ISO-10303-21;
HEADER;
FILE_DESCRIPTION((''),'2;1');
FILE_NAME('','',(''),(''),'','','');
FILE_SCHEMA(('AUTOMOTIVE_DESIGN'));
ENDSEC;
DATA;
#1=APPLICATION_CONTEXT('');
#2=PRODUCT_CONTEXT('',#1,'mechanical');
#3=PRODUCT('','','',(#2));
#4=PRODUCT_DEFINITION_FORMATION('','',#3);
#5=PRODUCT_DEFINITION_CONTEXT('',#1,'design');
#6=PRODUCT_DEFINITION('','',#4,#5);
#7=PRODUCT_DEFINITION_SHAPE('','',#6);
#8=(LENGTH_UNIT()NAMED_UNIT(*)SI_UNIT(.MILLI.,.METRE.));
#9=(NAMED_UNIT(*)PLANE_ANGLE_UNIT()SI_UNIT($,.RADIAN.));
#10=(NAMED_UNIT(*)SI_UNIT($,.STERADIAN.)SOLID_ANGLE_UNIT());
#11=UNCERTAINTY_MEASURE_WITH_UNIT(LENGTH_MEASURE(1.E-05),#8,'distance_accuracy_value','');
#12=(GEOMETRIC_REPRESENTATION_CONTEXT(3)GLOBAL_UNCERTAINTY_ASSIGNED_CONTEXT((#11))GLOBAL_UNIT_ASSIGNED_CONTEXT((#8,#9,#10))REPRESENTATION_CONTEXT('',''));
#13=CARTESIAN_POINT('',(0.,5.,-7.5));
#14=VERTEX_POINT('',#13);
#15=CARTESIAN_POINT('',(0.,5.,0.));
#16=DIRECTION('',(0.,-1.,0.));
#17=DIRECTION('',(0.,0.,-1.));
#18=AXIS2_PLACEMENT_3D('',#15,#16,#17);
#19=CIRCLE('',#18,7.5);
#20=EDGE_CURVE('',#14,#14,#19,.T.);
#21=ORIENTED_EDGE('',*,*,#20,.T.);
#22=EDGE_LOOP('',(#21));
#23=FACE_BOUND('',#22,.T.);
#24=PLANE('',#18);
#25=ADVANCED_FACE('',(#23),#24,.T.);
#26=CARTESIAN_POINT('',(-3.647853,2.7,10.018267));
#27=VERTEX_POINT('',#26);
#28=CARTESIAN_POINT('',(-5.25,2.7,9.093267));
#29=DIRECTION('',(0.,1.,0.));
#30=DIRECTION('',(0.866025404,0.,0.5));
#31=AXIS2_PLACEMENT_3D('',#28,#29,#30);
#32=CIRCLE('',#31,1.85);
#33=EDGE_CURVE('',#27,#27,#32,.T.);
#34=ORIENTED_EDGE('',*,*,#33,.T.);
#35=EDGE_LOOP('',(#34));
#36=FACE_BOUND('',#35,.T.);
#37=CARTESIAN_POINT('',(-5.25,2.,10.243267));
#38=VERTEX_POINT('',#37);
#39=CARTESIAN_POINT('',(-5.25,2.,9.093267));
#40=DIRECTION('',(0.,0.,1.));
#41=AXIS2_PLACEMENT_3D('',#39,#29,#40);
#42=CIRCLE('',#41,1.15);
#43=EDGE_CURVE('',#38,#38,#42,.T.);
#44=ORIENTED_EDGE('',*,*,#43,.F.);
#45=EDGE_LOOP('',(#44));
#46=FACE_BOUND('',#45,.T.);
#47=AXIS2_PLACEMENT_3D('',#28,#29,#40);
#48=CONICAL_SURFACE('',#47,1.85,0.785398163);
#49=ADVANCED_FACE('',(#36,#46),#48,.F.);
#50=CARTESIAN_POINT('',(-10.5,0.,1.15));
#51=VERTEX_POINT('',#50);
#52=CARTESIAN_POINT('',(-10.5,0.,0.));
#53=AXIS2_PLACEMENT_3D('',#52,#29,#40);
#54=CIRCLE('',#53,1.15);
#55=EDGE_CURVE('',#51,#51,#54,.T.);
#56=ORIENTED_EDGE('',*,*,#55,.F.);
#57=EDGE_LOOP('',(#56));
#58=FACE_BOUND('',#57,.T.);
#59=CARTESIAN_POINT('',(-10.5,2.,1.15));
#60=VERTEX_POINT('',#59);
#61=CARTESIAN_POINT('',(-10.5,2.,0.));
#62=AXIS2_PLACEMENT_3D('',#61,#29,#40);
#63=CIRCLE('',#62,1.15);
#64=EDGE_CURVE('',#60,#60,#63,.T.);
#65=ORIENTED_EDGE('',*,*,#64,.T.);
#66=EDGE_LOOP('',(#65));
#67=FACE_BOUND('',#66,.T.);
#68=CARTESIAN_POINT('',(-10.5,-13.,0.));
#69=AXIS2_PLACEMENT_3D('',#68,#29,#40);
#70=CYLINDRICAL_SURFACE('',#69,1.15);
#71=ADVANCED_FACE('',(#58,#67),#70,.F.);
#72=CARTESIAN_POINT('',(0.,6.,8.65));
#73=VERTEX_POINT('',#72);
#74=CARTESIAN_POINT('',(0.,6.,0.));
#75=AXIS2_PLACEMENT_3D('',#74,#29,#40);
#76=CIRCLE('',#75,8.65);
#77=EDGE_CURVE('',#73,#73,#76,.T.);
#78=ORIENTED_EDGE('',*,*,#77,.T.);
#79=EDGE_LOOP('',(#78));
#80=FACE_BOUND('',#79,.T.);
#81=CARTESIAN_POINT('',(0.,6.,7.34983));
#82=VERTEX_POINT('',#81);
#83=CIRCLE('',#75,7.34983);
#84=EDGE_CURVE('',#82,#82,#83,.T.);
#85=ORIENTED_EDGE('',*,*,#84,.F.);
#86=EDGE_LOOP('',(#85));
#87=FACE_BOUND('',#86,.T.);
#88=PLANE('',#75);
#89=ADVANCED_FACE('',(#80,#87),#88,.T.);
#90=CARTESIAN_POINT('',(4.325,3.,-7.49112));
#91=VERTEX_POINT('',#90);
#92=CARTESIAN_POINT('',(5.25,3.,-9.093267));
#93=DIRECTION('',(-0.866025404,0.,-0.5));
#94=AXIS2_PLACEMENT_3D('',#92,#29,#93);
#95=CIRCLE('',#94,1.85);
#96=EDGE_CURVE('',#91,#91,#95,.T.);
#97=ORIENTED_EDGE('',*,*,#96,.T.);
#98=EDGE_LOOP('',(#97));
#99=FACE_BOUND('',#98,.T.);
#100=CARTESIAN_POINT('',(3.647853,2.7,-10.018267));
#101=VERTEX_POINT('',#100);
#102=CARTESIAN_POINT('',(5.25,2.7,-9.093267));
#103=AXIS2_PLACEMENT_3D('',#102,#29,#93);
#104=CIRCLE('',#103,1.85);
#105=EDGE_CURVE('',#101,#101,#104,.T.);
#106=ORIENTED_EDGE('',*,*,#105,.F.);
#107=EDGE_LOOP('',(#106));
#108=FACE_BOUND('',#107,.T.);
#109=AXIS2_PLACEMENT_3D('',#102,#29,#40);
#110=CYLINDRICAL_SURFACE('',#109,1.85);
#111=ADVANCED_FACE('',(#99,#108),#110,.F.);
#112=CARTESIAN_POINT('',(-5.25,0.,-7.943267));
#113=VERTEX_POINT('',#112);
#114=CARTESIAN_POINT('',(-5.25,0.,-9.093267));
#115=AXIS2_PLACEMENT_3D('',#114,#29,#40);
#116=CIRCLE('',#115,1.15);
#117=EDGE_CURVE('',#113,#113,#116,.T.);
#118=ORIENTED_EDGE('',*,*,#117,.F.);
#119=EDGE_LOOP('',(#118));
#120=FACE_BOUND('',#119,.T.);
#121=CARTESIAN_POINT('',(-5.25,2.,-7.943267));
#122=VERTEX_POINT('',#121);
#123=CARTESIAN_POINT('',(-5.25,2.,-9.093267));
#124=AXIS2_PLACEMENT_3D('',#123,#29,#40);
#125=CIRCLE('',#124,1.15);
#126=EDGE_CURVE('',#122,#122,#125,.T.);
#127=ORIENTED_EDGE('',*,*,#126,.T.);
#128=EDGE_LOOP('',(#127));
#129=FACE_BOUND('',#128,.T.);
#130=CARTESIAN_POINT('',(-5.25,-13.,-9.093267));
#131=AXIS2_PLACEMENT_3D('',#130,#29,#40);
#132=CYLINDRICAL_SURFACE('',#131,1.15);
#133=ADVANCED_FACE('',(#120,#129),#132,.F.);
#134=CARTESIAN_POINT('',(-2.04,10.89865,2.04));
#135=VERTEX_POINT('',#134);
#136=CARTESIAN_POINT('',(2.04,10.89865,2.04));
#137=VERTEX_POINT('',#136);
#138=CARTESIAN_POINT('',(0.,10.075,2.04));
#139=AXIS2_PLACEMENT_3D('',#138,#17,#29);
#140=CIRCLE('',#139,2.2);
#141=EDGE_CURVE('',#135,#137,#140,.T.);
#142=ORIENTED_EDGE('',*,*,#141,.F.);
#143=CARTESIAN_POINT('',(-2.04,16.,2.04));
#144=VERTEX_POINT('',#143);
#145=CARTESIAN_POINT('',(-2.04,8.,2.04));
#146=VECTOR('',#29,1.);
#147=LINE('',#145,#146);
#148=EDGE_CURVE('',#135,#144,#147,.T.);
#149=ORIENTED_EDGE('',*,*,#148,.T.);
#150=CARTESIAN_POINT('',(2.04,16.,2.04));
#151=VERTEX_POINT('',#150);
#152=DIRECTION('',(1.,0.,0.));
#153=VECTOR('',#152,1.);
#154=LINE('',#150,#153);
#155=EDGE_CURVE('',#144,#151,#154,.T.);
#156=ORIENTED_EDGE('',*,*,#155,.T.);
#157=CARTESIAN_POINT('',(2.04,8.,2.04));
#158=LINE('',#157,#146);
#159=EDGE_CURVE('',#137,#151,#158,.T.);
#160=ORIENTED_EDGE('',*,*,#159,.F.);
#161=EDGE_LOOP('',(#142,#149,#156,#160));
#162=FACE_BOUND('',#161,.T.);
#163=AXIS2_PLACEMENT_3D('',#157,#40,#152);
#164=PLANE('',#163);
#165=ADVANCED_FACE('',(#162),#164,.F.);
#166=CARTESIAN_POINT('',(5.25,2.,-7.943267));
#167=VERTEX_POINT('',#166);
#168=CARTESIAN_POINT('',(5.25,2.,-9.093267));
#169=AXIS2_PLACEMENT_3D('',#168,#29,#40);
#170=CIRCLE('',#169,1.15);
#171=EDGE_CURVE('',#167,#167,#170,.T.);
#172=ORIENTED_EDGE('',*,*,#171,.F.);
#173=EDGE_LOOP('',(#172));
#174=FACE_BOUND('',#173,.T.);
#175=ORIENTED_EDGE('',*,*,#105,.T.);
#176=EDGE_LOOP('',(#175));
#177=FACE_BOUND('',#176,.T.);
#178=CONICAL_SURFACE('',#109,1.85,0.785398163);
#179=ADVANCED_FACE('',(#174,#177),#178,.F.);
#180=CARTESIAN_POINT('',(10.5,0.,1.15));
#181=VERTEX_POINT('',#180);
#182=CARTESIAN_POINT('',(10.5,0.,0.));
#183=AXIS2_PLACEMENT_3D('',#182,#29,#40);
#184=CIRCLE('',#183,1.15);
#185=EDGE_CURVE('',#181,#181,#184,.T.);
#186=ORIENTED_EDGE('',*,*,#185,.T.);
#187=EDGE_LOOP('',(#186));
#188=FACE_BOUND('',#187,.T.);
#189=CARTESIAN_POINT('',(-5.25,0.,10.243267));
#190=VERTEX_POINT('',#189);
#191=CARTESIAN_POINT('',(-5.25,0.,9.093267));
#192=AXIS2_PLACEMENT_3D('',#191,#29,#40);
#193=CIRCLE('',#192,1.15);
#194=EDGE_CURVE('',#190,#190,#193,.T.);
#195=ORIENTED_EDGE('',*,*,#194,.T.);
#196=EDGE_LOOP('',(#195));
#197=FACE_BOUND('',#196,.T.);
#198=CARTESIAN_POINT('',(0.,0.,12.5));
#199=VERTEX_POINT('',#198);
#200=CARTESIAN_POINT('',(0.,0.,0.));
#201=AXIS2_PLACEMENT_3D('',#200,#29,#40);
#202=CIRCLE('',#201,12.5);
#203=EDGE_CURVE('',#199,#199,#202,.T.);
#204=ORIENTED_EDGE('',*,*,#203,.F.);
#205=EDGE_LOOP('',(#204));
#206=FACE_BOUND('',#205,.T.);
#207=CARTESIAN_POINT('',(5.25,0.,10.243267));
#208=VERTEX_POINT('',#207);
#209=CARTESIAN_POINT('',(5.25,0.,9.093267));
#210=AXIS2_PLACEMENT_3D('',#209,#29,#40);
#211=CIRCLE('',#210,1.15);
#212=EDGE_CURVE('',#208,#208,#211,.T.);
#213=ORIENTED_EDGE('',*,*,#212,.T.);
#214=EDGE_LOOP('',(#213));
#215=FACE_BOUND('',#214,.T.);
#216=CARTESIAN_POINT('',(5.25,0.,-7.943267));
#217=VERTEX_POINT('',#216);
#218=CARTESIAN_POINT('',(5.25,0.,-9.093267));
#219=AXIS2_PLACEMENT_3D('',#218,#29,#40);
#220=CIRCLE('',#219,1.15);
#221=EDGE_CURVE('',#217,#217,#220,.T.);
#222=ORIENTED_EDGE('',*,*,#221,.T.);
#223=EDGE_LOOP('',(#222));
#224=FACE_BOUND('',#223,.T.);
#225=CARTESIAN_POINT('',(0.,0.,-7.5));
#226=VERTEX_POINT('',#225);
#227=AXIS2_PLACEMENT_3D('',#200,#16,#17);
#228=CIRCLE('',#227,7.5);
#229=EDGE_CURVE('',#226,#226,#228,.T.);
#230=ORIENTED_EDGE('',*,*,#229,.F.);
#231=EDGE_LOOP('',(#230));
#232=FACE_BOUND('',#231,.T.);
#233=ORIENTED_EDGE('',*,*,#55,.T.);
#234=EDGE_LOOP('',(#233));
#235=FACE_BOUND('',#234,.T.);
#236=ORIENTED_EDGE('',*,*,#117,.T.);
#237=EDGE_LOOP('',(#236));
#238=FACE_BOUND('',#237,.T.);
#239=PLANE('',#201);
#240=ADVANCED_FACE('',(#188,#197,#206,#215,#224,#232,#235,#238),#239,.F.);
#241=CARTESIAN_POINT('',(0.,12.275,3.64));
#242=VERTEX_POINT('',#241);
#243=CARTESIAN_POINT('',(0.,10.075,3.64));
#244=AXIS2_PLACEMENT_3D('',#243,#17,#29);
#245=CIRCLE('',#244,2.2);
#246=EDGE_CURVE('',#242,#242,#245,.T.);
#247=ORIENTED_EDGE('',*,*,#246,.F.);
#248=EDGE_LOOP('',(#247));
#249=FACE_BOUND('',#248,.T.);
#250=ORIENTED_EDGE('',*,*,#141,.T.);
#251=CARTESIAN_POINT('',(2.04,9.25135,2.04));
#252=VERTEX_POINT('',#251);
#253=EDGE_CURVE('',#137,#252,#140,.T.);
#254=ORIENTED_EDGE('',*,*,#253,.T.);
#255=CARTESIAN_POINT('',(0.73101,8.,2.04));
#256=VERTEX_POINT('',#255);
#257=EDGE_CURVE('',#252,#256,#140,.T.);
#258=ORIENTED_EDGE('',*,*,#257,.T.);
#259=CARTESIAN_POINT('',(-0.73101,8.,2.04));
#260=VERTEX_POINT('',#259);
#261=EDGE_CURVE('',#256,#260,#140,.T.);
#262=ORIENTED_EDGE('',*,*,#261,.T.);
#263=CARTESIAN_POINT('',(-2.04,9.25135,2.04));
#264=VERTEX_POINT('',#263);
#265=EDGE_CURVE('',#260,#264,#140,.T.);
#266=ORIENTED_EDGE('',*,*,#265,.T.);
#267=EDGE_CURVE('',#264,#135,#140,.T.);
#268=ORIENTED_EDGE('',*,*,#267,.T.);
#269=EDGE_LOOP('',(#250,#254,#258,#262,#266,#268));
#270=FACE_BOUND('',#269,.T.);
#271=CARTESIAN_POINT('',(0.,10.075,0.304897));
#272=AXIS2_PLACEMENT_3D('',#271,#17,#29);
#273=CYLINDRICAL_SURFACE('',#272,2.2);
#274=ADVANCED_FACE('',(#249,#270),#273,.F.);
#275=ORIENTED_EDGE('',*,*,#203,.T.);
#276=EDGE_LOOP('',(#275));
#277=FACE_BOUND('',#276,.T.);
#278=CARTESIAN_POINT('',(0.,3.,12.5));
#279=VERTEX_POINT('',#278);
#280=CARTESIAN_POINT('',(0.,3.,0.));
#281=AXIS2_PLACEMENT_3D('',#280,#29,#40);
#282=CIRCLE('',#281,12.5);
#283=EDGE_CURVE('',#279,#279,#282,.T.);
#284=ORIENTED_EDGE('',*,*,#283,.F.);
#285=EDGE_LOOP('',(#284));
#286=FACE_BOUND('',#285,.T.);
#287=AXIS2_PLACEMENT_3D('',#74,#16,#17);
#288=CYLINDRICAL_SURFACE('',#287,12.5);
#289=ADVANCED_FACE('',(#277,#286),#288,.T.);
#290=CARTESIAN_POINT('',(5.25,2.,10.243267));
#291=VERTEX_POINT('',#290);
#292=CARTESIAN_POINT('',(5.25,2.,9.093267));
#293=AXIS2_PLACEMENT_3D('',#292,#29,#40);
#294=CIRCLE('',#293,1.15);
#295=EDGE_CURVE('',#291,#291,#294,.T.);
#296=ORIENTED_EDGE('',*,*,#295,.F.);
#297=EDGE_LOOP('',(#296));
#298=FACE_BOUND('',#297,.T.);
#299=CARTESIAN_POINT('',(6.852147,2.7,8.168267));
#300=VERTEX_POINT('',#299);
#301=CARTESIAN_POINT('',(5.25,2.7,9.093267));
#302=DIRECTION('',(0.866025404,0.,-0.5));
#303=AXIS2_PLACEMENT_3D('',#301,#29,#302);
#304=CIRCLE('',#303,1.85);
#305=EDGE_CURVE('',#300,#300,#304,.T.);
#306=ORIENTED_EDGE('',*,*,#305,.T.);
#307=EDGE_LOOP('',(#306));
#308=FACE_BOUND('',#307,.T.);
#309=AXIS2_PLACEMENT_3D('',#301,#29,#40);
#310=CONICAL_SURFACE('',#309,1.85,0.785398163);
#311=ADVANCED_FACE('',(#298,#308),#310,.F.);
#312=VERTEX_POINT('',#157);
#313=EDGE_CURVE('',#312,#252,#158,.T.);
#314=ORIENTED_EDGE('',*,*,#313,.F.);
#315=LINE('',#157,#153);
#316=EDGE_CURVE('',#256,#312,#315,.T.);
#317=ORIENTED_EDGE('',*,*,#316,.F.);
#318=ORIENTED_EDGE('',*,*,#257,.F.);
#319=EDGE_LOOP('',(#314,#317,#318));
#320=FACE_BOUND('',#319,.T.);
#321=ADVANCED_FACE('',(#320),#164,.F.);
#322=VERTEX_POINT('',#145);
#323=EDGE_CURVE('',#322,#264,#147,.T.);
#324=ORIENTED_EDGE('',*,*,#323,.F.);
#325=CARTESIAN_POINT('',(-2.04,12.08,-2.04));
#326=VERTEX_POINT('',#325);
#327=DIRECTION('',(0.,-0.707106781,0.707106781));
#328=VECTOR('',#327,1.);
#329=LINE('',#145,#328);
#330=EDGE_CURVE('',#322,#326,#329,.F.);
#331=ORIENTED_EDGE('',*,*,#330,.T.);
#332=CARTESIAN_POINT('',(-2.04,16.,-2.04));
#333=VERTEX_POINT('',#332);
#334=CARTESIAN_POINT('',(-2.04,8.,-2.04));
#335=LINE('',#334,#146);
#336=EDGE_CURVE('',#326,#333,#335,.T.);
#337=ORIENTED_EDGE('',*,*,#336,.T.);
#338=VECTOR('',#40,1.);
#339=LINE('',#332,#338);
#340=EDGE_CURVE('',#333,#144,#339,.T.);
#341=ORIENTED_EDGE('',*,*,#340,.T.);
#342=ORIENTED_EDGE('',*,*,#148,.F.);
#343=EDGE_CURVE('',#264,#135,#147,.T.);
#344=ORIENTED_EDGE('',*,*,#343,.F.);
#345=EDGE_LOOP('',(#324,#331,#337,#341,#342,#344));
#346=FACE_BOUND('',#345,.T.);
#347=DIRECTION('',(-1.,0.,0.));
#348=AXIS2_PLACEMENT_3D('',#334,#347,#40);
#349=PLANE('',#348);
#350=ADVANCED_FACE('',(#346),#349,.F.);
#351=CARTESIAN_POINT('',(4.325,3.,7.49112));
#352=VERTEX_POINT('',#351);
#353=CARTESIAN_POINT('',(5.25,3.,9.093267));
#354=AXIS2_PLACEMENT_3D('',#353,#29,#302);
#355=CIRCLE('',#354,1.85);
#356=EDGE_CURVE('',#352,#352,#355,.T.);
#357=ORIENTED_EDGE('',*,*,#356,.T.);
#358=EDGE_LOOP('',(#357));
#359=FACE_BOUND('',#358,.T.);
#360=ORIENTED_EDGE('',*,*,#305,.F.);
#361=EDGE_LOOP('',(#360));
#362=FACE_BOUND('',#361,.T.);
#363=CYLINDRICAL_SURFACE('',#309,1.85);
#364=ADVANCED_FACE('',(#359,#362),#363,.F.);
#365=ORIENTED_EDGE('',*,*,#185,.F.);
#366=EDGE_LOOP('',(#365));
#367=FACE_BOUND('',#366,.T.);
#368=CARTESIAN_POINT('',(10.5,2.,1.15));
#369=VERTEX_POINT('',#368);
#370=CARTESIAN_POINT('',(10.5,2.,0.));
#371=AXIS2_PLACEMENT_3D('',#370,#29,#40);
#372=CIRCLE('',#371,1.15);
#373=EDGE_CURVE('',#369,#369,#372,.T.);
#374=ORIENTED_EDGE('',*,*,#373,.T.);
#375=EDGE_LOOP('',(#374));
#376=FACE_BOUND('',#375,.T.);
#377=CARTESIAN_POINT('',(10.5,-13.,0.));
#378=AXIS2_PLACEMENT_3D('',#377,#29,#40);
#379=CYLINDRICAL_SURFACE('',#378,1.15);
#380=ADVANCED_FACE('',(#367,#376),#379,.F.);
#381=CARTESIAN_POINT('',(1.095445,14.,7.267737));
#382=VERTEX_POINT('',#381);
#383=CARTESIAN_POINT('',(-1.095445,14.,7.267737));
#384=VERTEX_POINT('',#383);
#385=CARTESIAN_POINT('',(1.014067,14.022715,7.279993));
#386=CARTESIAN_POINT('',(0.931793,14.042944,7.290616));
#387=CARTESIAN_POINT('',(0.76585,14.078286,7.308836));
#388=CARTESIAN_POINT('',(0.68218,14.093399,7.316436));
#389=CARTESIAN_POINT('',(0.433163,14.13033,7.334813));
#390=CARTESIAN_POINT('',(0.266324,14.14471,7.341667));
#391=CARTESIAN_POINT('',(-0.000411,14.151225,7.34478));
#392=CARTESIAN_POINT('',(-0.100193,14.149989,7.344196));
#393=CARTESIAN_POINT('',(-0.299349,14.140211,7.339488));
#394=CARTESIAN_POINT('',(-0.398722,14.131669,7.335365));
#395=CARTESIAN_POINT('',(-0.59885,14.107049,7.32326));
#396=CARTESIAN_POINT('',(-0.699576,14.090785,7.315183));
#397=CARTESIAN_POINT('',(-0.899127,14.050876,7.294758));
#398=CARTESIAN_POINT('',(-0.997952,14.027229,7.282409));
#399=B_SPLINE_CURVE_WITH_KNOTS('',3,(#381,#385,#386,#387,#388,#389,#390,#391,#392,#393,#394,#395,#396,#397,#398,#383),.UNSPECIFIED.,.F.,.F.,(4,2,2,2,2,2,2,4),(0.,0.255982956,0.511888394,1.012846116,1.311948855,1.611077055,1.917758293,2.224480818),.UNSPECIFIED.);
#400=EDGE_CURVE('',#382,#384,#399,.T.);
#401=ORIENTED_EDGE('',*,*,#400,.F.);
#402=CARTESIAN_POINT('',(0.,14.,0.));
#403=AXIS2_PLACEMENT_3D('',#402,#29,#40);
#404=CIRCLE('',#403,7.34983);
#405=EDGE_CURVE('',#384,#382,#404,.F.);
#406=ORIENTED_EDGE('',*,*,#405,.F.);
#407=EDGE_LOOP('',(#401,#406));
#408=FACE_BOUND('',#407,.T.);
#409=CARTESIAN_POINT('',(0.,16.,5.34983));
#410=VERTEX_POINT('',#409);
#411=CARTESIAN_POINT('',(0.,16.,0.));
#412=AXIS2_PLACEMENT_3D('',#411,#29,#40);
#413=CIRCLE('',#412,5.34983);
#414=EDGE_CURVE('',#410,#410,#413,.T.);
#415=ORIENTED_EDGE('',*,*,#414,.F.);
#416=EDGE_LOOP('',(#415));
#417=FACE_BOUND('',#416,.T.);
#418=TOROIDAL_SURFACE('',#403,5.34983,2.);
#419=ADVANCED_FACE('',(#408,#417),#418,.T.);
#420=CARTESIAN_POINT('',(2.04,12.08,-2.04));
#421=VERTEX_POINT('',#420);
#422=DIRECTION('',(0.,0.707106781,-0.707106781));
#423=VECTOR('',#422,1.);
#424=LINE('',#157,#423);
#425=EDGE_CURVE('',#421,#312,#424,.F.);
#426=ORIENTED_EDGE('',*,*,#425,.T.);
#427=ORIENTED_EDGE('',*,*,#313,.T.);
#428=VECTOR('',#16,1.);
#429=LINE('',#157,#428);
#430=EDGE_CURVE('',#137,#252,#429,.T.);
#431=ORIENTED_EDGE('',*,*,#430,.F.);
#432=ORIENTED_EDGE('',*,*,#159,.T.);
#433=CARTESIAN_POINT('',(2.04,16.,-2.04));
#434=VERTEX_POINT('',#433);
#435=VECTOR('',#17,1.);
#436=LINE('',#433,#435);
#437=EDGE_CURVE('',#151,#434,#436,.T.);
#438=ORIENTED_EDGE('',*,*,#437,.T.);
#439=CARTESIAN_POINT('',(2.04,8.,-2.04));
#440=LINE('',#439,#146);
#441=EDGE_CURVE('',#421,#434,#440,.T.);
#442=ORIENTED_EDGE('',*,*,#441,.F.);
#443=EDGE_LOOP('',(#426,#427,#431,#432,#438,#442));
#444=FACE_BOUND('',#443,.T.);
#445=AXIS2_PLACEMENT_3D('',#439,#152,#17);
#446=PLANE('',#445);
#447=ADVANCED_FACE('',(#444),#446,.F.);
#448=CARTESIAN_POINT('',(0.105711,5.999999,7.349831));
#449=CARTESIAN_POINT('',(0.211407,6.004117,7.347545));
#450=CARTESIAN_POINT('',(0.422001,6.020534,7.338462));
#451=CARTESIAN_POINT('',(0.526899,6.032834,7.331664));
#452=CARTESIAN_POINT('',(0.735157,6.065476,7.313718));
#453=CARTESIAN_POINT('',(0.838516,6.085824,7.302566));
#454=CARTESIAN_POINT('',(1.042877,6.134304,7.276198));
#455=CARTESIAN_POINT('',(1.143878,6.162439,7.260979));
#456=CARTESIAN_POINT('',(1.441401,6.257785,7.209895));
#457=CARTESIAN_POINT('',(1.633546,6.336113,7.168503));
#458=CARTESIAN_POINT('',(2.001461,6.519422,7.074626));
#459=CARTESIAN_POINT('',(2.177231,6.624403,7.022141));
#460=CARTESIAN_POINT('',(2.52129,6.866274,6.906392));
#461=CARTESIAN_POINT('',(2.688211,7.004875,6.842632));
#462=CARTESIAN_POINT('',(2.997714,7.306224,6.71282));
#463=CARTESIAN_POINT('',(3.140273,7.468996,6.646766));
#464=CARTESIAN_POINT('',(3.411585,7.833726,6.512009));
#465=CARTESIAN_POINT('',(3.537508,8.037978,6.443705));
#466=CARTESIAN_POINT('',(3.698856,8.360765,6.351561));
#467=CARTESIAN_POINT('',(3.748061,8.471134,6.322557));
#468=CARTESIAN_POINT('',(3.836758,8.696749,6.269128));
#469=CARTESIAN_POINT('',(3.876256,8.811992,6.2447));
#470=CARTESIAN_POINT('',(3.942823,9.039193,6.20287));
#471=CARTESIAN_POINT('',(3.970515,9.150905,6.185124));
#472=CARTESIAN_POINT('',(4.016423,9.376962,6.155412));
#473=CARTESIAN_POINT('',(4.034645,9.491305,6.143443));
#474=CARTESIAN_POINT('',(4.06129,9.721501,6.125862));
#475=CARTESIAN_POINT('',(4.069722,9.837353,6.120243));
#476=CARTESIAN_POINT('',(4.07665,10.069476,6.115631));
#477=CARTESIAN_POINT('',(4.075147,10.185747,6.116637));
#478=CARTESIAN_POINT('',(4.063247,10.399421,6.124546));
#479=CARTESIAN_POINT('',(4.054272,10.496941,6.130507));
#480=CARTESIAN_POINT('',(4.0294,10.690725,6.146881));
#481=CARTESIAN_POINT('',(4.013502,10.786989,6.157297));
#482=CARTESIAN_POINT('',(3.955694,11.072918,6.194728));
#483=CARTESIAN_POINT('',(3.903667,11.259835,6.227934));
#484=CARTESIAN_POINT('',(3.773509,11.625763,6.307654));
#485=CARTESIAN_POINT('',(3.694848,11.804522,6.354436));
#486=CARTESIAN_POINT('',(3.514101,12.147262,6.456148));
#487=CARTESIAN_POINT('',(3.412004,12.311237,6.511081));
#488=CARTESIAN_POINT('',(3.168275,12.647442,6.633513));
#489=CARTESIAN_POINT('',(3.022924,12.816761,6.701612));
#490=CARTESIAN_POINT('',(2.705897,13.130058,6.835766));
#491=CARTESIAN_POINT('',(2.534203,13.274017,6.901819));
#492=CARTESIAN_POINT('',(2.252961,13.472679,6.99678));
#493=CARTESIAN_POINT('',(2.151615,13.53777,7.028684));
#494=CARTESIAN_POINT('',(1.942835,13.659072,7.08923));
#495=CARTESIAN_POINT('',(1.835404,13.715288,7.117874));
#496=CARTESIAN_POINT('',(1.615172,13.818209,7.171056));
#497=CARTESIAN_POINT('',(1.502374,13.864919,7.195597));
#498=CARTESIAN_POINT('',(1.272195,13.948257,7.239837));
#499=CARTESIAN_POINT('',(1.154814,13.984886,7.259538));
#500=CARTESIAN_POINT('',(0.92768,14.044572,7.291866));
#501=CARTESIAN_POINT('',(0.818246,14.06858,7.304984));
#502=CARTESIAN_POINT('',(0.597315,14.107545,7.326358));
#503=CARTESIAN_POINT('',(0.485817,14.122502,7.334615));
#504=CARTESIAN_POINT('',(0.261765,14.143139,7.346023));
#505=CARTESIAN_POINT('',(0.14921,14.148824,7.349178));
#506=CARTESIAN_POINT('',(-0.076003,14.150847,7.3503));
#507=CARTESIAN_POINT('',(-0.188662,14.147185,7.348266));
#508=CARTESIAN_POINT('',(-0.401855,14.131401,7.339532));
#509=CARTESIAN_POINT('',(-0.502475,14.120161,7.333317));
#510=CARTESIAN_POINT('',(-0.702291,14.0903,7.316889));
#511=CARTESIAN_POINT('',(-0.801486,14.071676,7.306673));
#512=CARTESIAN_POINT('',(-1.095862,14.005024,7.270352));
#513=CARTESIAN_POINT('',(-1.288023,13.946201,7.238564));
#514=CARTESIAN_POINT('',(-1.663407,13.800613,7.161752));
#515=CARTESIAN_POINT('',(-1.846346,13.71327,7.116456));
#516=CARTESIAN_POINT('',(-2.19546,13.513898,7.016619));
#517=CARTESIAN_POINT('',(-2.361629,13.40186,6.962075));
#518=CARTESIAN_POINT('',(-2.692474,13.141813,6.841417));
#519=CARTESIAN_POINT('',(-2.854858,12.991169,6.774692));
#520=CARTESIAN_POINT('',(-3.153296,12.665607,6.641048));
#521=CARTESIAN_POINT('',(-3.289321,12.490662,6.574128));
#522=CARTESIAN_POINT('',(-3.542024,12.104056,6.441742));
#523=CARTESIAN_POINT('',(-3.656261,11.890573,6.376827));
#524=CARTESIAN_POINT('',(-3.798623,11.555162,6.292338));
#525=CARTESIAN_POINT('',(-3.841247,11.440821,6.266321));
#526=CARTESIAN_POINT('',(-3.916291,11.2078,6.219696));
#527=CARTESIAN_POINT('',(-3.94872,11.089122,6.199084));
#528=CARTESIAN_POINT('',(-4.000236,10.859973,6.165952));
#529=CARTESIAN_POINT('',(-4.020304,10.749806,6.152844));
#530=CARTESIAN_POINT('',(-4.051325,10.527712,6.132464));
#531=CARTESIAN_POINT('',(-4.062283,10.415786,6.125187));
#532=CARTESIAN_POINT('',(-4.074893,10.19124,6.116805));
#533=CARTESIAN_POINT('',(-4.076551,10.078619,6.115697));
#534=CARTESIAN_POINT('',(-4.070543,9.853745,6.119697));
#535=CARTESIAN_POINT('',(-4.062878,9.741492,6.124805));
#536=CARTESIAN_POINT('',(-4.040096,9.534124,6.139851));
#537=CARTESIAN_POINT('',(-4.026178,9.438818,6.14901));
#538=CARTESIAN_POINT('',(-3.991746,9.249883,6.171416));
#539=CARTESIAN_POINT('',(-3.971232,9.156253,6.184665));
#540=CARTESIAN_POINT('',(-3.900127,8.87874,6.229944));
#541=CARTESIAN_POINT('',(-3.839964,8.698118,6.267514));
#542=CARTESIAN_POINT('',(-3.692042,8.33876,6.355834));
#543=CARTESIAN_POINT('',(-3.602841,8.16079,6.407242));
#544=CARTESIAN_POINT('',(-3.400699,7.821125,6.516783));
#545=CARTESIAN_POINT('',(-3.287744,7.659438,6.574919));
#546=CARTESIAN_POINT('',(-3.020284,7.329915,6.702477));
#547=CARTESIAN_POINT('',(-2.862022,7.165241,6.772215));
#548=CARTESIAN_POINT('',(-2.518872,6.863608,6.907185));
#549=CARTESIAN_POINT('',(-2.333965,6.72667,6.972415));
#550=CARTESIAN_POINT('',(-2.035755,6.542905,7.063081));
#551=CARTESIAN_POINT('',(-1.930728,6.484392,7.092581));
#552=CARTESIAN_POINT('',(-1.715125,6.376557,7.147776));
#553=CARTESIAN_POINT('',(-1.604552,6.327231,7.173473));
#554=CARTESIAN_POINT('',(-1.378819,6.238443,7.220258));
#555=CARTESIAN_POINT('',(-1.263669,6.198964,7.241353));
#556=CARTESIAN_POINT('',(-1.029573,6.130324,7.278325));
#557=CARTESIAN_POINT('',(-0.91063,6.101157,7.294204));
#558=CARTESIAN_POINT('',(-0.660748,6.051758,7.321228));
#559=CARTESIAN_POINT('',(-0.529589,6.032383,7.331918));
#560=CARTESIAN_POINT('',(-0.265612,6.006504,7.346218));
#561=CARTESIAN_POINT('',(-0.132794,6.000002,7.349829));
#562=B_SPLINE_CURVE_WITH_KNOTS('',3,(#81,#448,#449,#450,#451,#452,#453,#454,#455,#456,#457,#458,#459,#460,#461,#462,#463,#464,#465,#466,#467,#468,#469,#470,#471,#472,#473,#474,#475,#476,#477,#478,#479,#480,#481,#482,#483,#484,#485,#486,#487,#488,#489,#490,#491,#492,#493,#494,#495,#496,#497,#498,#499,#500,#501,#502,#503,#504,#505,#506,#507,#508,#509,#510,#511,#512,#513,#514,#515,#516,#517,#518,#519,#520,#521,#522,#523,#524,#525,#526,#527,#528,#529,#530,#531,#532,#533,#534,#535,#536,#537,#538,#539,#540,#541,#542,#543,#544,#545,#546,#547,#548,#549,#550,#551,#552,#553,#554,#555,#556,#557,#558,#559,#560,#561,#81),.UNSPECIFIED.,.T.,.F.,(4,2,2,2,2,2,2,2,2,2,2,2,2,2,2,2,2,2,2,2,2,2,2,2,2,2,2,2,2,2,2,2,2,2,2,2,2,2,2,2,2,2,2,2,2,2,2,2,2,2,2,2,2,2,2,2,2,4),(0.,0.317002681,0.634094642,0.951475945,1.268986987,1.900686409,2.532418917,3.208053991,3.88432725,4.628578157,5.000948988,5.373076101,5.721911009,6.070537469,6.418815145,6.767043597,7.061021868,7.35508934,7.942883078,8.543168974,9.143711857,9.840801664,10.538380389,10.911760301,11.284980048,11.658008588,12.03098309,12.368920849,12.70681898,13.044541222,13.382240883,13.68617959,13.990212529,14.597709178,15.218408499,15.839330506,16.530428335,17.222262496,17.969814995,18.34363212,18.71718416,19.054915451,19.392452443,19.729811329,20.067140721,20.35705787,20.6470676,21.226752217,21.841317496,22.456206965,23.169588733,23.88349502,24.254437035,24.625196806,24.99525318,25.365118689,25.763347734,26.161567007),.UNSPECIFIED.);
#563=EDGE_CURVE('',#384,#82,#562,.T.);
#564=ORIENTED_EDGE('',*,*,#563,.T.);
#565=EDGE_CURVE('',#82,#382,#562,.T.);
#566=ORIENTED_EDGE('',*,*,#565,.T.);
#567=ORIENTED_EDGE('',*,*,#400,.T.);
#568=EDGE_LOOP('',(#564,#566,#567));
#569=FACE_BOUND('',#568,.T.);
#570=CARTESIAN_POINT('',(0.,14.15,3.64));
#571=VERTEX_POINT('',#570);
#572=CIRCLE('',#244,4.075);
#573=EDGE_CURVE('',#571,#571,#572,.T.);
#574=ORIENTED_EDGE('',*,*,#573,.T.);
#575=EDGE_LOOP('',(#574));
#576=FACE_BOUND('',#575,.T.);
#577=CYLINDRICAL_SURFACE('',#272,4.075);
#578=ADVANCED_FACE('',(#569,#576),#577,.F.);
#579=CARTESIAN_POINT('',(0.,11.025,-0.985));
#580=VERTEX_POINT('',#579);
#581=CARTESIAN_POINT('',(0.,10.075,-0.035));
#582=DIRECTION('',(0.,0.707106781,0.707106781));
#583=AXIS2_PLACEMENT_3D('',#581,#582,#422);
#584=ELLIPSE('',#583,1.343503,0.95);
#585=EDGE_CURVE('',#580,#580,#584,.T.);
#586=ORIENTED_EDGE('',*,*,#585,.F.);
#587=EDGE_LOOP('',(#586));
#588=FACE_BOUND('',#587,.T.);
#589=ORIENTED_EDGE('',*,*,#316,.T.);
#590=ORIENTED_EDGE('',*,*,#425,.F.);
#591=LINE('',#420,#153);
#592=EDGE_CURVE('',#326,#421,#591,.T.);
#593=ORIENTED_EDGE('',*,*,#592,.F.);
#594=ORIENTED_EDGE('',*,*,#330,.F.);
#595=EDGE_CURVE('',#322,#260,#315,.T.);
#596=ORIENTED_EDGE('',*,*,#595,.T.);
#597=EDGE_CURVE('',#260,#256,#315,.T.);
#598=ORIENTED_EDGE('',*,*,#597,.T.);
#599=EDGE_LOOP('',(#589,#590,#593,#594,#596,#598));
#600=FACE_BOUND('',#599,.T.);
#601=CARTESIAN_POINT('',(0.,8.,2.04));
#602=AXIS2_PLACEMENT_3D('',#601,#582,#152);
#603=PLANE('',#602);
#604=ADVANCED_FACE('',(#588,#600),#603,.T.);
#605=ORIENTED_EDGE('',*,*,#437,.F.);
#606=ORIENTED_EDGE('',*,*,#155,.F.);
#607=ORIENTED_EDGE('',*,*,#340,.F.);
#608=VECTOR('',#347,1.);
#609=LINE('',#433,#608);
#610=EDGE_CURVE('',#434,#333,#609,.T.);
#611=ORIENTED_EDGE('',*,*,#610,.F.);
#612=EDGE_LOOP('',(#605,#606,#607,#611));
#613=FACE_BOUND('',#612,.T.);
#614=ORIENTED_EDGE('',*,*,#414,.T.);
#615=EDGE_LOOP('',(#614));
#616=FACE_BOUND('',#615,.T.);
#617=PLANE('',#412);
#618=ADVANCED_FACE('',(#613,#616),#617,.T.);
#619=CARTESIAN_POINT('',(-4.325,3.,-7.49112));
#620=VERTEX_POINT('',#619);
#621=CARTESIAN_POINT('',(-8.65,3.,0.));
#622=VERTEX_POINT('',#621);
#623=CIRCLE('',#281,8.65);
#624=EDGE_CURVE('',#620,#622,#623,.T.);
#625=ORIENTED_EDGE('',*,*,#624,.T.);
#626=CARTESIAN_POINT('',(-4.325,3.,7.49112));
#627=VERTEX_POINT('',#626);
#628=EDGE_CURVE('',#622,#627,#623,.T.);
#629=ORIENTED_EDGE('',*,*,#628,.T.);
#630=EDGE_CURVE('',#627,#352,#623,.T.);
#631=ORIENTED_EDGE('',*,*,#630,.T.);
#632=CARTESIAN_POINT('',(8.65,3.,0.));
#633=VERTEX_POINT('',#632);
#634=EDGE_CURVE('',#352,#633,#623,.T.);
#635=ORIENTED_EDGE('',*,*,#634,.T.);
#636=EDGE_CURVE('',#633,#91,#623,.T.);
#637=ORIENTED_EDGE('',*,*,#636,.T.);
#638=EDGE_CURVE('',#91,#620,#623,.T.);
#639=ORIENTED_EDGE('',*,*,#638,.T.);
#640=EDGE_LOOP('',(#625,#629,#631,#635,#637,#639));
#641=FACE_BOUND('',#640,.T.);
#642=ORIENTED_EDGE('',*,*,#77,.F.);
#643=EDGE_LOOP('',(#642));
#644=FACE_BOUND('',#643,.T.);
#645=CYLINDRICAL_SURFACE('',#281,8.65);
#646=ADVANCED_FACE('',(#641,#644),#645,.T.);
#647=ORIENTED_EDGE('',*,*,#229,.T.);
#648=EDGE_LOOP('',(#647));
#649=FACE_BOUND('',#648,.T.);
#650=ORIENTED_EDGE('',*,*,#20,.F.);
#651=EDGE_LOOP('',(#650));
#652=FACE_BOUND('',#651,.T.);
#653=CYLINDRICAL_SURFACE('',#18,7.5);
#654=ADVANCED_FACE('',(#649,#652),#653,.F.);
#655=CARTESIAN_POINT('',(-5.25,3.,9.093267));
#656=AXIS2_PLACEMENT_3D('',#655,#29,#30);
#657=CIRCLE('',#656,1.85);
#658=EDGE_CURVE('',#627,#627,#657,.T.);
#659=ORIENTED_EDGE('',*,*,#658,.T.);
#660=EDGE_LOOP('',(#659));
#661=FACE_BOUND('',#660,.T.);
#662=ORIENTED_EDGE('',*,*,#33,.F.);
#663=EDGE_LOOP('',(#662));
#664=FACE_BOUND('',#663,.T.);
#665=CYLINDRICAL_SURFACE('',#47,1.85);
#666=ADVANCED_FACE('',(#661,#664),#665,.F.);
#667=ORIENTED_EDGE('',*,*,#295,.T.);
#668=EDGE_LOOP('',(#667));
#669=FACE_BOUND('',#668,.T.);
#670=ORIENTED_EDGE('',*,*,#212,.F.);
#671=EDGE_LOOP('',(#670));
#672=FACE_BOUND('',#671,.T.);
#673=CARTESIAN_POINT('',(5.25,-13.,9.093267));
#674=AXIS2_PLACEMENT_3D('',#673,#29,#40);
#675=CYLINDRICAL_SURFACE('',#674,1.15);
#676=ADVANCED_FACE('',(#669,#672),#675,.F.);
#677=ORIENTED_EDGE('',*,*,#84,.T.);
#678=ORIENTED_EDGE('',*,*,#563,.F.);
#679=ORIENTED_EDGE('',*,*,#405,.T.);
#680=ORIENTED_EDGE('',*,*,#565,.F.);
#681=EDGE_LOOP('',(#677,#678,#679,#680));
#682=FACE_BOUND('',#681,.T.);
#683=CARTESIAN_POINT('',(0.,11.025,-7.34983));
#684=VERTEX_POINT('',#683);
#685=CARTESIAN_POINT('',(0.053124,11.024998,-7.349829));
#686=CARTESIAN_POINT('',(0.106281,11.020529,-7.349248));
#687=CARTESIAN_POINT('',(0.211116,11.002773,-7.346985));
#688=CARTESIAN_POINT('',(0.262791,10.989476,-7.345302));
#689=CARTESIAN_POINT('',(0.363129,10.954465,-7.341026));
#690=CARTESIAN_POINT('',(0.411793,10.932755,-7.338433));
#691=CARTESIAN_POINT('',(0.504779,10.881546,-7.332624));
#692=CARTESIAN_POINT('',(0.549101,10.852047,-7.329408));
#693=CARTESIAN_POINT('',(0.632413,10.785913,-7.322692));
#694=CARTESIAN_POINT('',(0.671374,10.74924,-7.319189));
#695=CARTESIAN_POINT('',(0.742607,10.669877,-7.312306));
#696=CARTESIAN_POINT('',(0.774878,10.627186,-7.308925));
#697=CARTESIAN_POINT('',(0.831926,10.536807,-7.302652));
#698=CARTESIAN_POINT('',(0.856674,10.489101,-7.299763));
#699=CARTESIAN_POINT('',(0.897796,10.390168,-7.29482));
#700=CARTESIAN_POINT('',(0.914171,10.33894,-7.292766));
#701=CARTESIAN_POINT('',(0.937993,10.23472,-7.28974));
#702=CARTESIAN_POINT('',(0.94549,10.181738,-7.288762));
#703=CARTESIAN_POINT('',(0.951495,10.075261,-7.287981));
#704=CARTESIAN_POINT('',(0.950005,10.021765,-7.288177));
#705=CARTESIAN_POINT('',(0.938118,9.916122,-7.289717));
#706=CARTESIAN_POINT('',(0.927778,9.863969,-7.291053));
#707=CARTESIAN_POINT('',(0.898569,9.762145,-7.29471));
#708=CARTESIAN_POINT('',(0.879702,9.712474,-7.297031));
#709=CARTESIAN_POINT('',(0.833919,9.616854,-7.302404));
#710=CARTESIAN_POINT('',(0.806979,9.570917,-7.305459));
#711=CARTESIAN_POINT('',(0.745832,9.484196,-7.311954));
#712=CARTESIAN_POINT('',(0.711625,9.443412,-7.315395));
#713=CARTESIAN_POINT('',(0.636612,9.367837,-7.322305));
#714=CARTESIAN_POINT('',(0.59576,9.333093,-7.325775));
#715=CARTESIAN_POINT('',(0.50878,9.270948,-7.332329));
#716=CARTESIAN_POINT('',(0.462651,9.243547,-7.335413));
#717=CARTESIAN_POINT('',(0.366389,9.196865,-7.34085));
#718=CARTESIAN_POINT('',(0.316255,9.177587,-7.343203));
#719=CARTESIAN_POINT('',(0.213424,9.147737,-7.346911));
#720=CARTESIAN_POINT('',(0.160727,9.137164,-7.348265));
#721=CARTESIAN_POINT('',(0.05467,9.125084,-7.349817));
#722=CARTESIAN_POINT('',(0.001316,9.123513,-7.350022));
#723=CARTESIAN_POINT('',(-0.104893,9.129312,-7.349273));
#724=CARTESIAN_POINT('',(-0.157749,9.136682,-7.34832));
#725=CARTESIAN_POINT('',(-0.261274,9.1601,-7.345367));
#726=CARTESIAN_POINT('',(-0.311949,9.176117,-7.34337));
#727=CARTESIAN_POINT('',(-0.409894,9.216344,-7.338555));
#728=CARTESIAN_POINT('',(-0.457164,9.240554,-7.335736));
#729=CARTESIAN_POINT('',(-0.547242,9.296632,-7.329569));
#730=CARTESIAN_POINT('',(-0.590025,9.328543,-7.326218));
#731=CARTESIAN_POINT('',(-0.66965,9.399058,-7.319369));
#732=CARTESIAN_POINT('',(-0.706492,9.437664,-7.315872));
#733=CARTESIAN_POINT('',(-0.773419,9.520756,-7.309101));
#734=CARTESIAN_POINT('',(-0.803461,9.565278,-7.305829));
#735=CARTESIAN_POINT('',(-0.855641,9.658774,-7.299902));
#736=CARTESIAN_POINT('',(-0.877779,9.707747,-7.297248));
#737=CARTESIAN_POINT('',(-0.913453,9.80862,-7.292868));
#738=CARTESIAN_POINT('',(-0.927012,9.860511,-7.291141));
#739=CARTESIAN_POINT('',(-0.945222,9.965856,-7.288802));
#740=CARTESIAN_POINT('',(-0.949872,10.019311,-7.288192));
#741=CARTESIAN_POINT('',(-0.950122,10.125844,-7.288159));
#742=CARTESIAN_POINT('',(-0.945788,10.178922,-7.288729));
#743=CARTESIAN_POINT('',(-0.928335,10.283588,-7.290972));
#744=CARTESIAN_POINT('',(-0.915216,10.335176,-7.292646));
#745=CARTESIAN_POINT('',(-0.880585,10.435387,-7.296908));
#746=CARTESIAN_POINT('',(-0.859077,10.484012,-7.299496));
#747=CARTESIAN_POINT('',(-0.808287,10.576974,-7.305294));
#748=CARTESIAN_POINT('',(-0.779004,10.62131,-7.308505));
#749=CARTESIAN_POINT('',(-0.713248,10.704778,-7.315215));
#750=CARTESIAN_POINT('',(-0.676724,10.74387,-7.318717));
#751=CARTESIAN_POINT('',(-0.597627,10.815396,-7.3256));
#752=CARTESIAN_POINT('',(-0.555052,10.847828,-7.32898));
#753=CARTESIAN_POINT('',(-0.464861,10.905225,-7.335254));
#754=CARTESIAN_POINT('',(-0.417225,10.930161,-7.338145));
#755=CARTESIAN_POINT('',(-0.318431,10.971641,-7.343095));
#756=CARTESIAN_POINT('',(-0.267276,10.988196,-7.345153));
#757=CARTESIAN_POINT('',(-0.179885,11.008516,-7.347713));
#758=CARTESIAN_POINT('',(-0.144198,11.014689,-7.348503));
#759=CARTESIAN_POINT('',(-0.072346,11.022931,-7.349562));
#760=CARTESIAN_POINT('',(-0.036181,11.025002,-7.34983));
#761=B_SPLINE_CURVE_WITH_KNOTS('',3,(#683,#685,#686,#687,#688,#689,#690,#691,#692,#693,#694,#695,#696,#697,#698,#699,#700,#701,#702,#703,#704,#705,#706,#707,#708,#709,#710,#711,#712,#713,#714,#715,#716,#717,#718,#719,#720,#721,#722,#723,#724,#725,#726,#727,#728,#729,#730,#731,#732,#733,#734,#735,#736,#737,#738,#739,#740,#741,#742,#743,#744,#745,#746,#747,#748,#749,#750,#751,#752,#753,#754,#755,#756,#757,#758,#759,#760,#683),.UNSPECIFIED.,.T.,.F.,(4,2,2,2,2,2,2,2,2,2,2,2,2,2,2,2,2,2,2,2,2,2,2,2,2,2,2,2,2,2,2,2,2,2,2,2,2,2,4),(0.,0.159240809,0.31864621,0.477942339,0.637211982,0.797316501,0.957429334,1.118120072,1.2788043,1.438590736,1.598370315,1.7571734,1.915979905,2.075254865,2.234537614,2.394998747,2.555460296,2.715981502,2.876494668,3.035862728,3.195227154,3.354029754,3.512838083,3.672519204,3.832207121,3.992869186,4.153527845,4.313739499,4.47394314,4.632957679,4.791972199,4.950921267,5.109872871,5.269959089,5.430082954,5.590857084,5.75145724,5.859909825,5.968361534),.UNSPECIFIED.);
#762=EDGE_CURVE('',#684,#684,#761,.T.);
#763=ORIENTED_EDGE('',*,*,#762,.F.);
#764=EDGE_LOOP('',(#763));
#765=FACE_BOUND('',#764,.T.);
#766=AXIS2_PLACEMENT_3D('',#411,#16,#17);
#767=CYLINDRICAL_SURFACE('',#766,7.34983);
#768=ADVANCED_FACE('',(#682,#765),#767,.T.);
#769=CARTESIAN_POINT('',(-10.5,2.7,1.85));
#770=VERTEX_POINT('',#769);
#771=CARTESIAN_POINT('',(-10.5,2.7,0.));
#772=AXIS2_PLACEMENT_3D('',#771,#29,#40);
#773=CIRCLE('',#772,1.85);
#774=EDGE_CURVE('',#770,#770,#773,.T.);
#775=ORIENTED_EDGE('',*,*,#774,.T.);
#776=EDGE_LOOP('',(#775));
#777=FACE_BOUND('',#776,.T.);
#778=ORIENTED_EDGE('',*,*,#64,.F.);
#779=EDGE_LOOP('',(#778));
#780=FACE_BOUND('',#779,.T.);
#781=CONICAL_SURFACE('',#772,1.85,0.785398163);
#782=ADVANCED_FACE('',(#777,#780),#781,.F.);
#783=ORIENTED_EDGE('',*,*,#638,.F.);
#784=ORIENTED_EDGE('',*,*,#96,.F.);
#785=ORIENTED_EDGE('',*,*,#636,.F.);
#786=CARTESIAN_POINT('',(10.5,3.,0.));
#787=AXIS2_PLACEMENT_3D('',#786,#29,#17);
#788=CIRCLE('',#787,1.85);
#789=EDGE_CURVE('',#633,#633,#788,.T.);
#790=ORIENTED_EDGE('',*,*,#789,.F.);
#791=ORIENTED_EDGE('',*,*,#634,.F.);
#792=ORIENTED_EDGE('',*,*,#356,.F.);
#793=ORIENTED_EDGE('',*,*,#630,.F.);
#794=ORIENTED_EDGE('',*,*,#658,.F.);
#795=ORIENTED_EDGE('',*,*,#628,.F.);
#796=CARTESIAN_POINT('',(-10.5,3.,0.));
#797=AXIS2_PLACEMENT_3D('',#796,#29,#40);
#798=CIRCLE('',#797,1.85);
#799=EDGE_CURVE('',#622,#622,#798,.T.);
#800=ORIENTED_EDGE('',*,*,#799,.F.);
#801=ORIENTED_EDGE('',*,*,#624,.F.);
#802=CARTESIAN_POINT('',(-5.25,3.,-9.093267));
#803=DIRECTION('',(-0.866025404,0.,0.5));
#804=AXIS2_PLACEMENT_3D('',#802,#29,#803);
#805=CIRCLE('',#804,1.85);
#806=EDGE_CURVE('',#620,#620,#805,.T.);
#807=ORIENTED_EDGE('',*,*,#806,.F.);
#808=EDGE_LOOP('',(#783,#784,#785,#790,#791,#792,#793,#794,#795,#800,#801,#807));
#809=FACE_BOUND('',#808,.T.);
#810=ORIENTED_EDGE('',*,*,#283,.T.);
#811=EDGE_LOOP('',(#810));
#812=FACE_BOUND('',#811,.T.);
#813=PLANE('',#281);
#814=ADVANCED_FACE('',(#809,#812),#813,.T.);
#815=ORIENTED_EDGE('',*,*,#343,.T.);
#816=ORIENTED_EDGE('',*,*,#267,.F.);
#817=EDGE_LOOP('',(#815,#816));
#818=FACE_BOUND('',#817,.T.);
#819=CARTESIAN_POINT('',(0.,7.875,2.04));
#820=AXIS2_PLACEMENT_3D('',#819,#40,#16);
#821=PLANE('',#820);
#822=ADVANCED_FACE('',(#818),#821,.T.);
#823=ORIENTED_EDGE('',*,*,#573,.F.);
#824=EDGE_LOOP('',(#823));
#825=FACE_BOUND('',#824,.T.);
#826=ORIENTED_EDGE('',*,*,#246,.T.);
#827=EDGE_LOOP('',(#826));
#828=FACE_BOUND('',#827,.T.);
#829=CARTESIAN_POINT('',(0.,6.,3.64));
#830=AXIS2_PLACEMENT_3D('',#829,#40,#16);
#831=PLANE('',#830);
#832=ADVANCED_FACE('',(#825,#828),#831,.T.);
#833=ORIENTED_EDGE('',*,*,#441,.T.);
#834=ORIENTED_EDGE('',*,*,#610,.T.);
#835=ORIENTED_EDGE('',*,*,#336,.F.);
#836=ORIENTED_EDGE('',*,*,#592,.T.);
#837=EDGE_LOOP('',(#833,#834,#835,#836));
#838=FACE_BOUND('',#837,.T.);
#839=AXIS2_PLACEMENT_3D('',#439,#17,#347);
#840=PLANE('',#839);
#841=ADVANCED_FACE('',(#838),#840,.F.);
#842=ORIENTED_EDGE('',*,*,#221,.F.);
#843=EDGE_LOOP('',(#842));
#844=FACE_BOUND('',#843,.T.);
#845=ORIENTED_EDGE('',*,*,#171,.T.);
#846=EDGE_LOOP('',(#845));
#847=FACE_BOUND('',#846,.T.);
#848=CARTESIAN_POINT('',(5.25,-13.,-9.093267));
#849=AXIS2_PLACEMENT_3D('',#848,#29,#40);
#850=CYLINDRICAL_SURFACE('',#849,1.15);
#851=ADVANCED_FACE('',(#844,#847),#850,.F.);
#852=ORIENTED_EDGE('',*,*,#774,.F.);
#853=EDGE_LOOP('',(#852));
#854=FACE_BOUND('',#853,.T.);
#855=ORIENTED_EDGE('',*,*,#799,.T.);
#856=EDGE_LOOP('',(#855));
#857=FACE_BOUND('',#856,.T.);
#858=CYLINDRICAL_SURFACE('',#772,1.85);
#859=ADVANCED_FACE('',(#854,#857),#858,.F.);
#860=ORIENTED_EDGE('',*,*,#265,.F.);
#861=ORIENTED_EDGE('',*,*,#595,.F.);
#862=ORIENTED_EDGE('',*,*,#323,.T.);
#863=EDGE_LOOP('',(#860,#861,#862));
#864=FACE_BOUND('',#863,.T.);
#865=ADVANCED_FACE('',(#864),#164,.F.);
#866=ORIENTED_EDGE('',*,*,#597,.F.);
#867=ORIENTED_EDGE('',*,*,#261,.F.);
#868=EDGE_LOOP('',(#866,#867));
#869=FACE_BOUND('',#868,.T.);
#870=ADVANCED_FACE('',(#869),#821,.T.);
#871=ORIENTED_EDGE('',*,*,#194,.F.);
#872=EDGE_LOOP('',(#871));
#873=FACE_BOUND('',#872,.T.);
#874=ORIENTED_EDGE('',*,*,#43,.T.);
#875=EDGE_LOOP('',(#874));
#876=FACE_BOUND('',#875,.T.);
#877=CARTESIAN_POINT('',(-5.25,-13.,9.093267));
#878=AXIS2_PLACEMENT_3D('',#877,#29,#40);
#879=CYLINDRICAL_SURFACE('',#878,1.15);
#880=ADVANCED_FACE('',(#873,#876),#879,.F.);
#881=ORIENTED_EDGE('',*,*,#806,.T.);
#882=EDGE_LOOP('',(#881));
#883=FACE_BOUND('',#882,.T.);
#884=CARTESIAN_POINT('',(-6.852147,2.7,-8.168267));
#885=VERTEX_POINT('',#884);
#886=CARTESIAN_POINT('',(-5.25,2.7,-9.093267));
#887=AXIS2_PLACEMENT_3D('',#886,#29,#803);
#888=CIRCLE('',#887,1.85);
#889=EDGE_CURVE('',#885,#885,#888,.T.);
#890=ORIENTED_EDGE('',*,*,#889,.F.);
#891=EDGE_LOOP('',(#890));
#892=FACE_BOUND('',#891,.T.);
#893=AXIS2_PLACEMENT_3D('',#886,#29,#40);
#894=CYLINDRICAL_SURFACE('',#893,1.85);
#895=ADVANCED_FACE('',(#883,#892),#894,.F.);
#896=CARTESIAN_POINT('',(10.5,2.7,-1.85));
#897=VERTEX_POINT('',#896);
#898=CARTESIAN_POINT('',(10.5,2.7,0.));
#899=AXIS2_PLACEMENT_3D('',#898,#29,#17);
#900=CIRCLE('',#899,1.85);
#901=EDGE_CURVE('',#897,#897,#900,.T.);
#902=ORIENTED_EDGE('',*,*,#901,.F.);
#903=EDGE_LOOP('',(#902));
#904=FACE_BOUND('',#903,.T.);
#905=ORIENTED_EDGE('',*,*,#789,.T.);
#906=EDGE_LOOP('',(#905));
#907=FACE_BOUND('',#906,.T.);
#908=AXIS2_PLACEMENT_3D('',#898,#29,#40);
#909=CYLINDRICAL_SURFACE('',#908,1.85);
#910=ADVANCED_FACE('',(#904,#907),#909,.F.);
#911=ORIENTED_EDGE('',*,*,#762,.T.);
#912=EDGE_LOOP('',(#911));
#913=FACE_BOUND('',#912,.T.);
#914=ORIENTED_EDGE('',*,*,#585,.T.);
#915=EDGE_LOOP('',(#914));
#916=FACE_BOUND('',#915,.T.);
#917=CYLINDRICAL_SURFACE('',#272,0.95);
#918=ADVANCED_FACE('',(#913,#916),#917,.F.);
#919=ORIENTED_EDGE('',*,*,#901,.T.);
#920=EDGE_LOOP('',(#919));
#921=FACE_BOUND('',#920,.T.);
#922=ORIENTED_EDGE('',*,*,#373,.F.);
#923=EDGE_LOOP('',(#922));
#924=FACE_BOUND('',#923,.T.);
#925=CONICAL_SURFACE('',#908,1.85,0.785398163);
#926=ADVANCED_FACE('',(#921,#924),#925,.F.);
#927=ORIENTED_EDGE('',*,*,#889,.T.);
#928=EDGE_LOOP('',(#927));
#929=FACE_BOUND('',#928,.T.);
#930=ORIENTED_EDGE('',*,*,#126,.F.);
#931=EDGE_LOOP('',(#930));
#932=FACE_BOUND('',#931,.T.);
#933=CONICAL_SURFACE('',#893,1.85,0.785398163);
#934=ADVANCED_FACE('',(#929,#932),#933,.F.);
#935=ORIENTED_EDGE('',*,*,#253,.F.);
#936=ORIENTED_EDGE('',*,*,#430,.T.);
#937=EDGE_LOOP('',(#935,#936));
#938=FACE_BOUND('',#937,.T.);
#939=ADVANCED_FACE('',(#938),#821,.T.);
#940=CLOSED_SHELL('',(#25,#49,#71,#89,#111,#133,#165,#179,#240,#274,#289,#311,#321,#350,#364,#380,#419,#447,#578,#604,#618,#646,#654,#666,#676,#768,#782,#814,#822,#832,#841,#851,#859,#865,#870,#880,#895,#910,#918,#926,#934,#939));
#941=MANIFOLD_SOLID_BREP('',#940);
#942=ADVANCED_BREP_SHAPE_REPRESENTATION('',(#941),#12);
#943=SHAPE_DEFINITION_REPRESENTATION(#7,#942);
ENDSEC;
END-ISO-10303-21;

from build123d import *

# Parameters (mm, degrees)
SKETCH_1_R               = 12.5
EXTRUDE_1_DEPTH          = 6
SKETCH_4_R               = 1.15
CUT_EXTRUDE_2_DEPTH      = 19
SKETCH_3_R               = 7.5
CUT_EXTRUDE_3_DEPTH      = 5
CHAMFER_2_SIZE           = 0.7
SKETCH_8_R               = 17.454292773
SKETCH_8_R_2             = 8.65
CUT_EXTRUDE_4_DEPTH      = 3
PATTERN_CIRCULAR_2_COUNT = 6
SKETCH_2_R               = 7.34982993
EXTRUDE_2_DEPTH          = 10
SKETCH_9_R               = 1.85
CUT_EXTRUDE_5_DEPTH      = 0.3
CHAMFER_3_SIZE           = 0.7
PATTERN_CIRCULAR_3_COUNT = 6
CHAMFER_4_SIZE           = 0.7
SKETCH_10_W              = 4.08
SKETCH_10_H              = 4.08
CUT_EXTRUDE_6_DEPTH      = 8
FILLET_1_R               = 2
CHAMFER_5_SIZE           = 4.08


# Some blends are built 0.0001 mm under size
with BuildPart() as part:
    # 草图1 → 凸台-拉伸1 (new body)
    with BuildSketch(Plane(origin=(0, 0, 0), x_dir=(1, 0, 0), z_dir=(0, 1, 0))):
        with Locations(Location((0, 0, 0), (0, 0, 270))):
            Circle(SKETCH_1_R)
    extrude(amount=EXTRUDE_1_DEPTH)

    # 草图4 → 切除-拉伸2 (cut)
    with BuildSketch(Plane(origin=(0, 6, 0), x_dir=(1, 0, 0), z_dir=(0, 1, 0))):
        with Locations(Location((-10.5, 0, 0), (0, 0, 270))):
            Circle(SKETCH_4_R)
    cut_extrude_2 = extrude(amount=-CUT_EXTRUDE_2_DEPTH, mode=Mode.SUBTRACT)

    # 草图3 → 切除-拉伸3 (cut)
    with BuildSketch(Plane(origin=(0, 0, 0), x_dir=(-1, 0, 0), z_dir=(0, -1, 0))):
        with Locations(Location((0, 0, 0), (0, 0, 90))):
            Circle(SKETCH_3_R)
    extrude(amount=-CUT_EXTRUDE_3_DEPTH, mode=Mode.SUBTRACT)

    # 倒角2
    chamfer_2_edges = [part.edges().sort_by_distance(p)[0] for p in [
        (-10.5, 6, -1.15),
    ]]
    chamfer(chamfer_2_edges, length=CHAMFER_2_SIZE)

    # 草图8 → 切除-拉伸4 (cut)
    with BuildSketch(Plane(origin=(0, 6, 0), x_dir=(1, 0, 0), z_dir=(0, 1, 0))):
        Circle(SKETCH_8_R)
        with Locations(Location((0, 0, 0), (0, 0, 270))):
            Circle(SKETCH_8_R_2, mode=Mode.SUBTRACT)
    extrude(amount=-CUT_EXTRUDE_4_DEPTH, mode=Mode.SUBTRACT)

    # 阵列(圆周)2: 切除-拉伸2 ×6 about axis
    pattern_circular_2_axis = Axis((0, 0, 0), (0, 1, 0))
    for i in range(1, PATTERN_CIRCULAR_2_COUNT):
        add(cut_extrude_2.rotate(pattern_circular_2_axis, i * 360 / PATTERN_CIRCULAR_2_COUNT), mode=Mode.SUBTRACT)

    # 草图2 → 凸台-拉伸2 (add)
    with BuildSketch(Plane(origin=(0, 6, 0), x_dir=(1, 0, 0), z_dir=(0, 1, 0))):
        with Locations(Location((0, 0, 0), (0, 0, 270))):
            Circle(SKETCH_2_R)
    extrude(amount=EXTRUDE_2_DEPTH)

    # 草图9 → 切除-拉伸5 (cut)
    with BuildSketch(Plane(origin=(0, 3, 0), x_dir=(1, 0, 0), z_dir=(0, 1, 0))):
        with Locations(Location((-10.5, 0, 0), (0, 0, 270))):
            Circle(SKETCH_9_R)
    cut_extrude_5 = extrude(amount=-CUT_EXTRUDE_5_DEPTH, mode=Mode.SUBTRACT)

    # 倒角3
    chamfer_3_edges = [part.edges().sort_by_distance(p)[0] for p in [
        (-10.5, 2.7, -1.15),
    ]]
    chamfer(chamfer_3_edges, length=CHAMFER_3_SIZE - 0.0001)  # a hair under: the kernel refuses the full size

    # 阵列(圆周)3: 切除-拉伸5 ×6 about axis
    pattern_circular_3_axis = Axis((0, 0, 0), (0, 1, 0))
    for i in range(1, PATTERN_CIRCULAR_3_COUNT):
        add(cut_extrude_5.rotate(pattern_circular_3_axis, i * 360 / PATTERN_CIRCULAR_3_COUNT), mode=Mode.SUBTRACT)

    # 倒角4
    chamfer_4_edges = [part.edges().sort_by_distance(p)[0] for p in [
        (-4.254070786, 2.7, -9.66826674),
        (6.245929214, 2.7, -8.51826674),
        (10.5, 2.7, 1.15),
        (4.254070786, 2.7, 9.66826674),
        (-6.245929214, 2.7, 8.51826674),
    ]]
    chamfer(chamfer_4_edges, length=CHAMFER_4_SIZE - 0.0001)  # a hair under: the kernel refuses the full size

    # 草图10 → 切除-拉伸6 (cut)
    with BuildSketch(Plane(origin=(0, 16, 0), x_dir=(1, 0, 0), z_dir=(0, 1, 0))):
        Rectangle(SKETCH_10_W, SKETCH_10_H)
    extrude(amount=-CUT_EXTRUDE_6_DEPTH, mode=Mode.SUBTRACT)

    # 草图11 → 切除-旋转1 (revolve, cut)
    with BuildSketch(Plane(origin=(0, 0, 0), x_dir=(0, 0, -1), z_dir=(1, 0, 0)), mode=Mode.PRIVATE) as cut_revolve_1_sk:
        Polygon((-0.304897272, 10.075), (-10.874100718, 10.075), (-10.874100718, 6), (-3.64, 6), (-3.64, 7.875), (-2.04, 7.875), (-2.04, 9.125), (11.125701635, 9.125), (11.125701635, 10.075), align=None)
    revolve(cut_revolve_1_sk.sketch.rotate(Axis((0, 10.075, 0.304897272), (0, 0, 1)), 180), axis=Axis((0, 10.075, 0.304897272), (0, 0, 1)), mode=Mode.SUBTRACT)

    # 圆角1
    # the kernel refuses this fillet: 2 mm, written as the material it takes off along each edge
    with BuildSketch(Plane(origin=(0, 16, 0), x_dir=(0, 0, 1), z_dir=(-1, 0, 0))) as fillet_1_piece_1:
        with BuildLine():
            CenterArc((7.34982993 - FILLET_1_R, -FILLET_1_R), FILLET_1_R, 0, 90)
            Line((7.34982993 - FILLET_1_R, 0), (7.34982993, 0))
            Line((7.34982993, 0), (7.34982993, -FILLET_1_R))
        make_face()
    revolve(axis=Axis((0, 16, 0), (0, 1, 0)), mode=Mode.SUBTRACT)

    # 倒角5
    # the kernel refuses this chamfer: 4.08 mm, written as the material it adds along each edge
    with BuildSketch(Plane(origin=(2.04, 8, -2.04), x_dir=(0, 0.9996219169112968, -0.02749587661058642), z_dir=(-1, 0, 0))) as chamfer_5_piece_1_section:
        Polygon((CHAMFER_5_SIZE * 0.999621916911, -CHAMFER_5_SIZE * 0.0274958766106), (-CHAMFER_5_SIZE * 0.0274958766106, -CHAMFER_5_SIZE * 0.999621916911), (0, 0), align=None)
    chamfer_5_piece_1 = extrude(amount=4.08, mode=Mode.PRIVATE)
    chamfer_5_piece_1 = chamfer_5_piece_1 - Plane(origin=(0, 10.075, -1.478470711), x_dir=(0, 1, 0), z_dir=(0, 0, -1)) * Cylinder(0.95, 25, mode=Mode.PRIVATE)
    add(chamfer_5_piece_1)


solid = part.part
